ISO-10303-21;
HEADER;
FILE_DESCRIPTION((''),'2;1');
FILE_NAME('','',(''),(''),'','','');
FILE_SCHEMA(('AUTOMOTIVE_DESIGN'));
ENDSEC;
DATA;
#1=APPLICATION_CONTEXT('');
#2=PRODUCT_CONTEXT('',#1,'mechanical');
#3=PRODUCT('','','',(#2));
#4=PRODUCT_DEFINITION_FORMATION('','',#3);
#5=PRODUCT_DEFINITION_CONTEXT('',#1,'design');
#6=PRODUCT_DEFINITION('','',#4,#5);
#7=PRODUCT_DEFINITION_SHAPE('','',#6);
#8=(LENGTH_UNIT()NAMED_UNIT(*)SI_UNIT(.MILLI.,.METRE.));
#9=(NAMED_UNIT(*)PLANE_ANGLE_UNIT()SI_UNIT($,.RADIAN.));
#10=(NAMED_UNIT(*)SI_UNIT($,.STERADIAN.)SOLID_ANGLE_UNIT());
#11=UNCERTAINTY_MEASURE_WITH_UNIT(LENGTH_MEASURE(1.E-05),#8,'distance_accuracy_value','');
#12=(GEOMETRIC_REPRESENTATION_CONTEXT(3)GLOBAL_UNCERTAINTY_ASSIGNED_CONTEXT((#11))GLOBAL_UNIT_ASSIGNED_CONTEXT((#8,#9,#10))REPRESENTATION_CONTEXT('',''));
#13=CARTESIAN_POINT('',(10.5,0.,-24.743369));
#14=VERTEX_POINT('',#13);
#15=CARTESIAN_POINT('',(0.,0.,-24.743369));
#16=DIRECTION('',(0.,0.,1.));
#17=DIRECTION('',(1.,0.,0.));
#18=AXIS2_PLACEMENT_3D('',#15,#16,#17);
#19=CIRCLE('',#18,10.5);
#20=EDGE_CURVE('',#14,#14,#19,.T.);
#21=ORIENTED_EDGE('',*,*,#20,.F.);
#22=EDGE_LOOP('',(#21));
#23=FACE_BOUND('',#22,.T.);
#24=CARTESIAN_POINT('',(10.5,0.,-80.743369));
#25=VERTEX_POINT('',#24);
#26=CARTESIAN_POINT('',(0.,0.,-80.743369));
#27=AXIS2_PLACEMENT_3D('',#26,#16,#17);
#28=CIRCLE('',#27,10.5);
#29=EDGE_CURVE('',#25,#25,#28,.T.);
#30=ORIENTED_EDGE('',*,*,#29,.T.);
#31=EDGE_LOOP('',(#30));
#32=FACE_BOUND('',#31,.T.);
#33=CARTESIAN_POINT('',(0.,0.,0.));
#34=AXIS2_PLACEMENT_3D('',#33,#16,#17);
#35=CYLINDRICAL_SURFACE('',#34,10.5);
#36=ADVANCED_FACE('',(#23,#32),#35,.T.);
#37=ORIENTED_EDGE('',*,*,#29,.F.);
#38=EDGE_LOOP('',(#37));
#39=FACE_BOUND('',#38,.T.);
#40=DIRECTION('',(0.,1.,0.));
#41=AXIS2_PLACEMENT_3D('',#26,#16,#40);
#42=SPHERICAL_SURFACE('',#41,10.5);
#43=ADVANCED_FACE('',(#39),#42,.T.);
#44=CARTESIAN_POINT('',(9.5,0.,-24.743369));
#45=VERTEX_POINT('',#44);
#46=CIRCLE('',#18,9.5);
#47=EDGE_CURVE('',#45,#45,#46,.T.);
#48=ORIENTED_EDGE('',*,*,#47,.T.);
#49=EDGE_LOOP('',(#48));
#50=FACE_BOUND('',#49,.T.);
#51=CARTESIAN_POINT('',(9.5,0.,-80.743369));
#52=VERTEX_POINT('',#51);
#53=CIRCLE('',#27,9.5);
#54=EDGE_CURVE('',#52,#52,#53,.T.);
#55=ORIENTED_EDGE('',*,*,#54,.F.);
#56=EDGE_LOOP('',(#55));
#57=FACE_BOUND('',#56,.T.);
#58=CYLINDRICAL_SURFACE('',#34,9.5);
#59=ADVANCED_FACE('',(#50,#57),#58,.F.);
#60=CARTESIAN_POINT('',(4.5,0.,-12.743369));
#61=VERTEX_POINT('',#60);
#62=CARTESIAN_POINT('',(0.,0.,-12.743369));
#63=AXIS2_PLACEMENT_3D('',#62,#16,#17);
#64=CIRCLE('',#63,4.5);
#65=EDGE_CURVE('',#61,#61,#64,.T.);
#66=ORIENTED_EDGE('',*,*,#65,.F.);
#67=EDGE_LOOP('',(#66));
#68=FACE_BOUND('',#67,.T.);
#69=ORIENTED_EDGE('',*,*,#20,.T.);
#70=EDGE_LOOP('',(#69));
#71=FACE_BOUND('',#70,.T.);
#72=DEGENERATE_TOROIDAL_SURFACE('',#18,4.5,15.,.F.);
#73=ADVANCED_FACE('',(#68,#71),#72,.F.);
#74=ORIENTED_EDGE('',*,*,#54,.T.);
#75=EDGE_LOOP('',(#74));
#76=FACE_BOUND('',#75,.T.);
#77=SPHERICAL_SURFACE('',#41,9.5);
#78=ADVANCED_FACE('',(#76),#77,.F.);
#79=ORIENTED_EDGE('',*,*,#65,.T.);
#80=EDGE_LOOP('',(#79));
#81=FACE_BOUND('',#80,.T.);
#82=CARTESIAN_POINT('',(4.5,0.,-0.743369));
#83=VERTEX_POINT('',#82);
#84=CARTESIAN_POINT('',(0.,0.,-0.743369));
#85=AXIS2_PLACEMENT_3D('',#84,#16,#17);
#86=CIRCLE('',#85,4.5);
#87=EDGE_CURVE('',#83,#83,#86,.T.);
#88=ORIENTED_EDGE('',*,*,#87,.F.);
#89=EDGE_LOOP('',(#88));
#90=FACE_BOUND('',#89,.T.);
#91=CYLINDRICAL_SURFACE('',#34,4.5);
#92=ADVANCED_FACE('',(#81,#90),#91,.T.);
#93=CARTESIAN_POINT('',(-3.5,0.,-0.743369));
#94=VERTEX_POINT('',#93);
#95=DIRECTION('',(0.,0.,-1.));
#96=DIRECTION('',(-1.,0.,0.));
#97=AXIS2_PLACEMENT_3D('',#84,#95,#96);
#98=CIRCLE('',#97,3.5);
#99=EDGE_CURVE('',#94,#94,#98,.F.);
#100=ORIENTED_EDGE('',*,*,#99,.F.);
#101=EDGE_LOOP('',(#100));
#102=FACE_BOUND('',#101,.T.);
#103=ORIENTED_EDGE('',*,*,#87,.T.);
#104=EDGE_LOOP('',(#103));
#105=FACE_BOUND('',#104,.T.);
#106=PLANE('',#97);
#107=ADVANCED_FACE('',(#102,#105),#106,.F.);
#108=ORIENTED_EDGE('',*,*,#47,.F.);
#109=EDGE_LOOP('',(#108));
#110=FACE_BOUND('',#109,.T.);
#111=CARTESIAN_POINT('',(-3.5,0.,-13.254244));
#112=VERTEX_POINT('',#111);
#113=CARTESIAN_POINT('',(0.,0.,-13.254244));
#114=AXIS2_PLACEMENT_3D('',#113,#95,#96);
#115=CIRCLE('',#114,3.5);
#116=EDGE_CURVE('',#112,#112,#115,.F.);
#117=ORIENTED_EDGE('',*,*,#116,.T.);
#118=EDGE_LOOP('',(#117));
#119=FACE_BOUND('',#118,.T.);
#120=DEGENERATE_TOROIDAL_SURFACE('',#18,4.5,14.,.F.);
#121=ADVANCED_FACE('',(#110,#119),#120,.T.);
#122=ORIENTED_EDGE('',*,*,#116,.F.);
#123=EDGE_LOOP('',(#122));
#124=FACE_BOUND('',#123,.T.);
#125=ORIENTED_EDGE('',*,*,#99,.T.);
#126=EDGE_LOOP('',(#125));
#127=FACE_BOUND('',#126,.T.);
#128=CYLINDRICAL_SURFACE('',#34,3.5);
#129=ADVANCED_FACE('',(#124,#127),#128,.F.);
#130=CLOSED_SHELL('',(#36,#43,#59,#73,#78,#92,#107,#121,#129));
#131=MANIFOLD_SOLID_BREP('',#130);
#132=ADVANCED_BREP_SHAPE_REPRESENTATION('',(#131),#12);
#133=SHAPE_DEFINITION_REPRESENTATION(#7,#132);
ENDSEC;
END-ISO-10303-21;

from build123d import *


# Read off the part's stored shape, not the designer's step: Shell1
with BuildPart() as part:
    # Sketch1 → Revolve1 (revolve)
    with BuildSketch(Plane(origin=(0, 0, 0), x_dir=(0, 0, -1), z_dir=(1, 0, 0)), mode=Mode.PRIVATE) as revolve1_sk:
        with BuildLine():
            Line((0.74336912, 4.5), (12.74336912, 4.5))
            ThreePointArc((12.74336912, 4.5), (18.035165187, 8.916407865), (24.74336912, 10.5))
            Line((24.74336912, 10.5), (80.74336912, 10.5))
            ThreePointArc((80.74336912, 10.5), (88.167990322, 7.424621202), (91.24336912, 0))
            Line((91.24336912, 0), (0.74336912, 0))
            Line((0.74336912, 0), (0.74336912, 4.5))
        make_face()
    revolve(revolve1_sk.sketch.rotate(Axis((0, 0, 0), (0, 0, -1)), 90), axis=Axis((0, 0, 0), (0, 0, -1)))

    # Shell1 outline → Shell1 (revolve, cut)
    with BuildSketch(Plane.XZ):
        with BuildLine():
            Line((0, -0.74336912), (0, -90.24336912))
            ThreePointArc((0, -90.24336912), (6.717514422, -87.46088354), (9.5, -80.743369117))
            Line((9.5, -80.743369117), (9.5, -24.74336912))
            ThreePointArc((9.5, -24.74336912), (7.909673646, -18.262628421), (3.5, -13.254243826))
            Line((3.5, -13.254243826), (3.5, -0.74336912))
            Line((3.5, -0.74336912), (0, -0.74336912))
        make_face()
    revolve(axis=Axis((0, 0, 0), (0, 0, 1)), mode=Mode.SUBTRACT)


solid = part.part
